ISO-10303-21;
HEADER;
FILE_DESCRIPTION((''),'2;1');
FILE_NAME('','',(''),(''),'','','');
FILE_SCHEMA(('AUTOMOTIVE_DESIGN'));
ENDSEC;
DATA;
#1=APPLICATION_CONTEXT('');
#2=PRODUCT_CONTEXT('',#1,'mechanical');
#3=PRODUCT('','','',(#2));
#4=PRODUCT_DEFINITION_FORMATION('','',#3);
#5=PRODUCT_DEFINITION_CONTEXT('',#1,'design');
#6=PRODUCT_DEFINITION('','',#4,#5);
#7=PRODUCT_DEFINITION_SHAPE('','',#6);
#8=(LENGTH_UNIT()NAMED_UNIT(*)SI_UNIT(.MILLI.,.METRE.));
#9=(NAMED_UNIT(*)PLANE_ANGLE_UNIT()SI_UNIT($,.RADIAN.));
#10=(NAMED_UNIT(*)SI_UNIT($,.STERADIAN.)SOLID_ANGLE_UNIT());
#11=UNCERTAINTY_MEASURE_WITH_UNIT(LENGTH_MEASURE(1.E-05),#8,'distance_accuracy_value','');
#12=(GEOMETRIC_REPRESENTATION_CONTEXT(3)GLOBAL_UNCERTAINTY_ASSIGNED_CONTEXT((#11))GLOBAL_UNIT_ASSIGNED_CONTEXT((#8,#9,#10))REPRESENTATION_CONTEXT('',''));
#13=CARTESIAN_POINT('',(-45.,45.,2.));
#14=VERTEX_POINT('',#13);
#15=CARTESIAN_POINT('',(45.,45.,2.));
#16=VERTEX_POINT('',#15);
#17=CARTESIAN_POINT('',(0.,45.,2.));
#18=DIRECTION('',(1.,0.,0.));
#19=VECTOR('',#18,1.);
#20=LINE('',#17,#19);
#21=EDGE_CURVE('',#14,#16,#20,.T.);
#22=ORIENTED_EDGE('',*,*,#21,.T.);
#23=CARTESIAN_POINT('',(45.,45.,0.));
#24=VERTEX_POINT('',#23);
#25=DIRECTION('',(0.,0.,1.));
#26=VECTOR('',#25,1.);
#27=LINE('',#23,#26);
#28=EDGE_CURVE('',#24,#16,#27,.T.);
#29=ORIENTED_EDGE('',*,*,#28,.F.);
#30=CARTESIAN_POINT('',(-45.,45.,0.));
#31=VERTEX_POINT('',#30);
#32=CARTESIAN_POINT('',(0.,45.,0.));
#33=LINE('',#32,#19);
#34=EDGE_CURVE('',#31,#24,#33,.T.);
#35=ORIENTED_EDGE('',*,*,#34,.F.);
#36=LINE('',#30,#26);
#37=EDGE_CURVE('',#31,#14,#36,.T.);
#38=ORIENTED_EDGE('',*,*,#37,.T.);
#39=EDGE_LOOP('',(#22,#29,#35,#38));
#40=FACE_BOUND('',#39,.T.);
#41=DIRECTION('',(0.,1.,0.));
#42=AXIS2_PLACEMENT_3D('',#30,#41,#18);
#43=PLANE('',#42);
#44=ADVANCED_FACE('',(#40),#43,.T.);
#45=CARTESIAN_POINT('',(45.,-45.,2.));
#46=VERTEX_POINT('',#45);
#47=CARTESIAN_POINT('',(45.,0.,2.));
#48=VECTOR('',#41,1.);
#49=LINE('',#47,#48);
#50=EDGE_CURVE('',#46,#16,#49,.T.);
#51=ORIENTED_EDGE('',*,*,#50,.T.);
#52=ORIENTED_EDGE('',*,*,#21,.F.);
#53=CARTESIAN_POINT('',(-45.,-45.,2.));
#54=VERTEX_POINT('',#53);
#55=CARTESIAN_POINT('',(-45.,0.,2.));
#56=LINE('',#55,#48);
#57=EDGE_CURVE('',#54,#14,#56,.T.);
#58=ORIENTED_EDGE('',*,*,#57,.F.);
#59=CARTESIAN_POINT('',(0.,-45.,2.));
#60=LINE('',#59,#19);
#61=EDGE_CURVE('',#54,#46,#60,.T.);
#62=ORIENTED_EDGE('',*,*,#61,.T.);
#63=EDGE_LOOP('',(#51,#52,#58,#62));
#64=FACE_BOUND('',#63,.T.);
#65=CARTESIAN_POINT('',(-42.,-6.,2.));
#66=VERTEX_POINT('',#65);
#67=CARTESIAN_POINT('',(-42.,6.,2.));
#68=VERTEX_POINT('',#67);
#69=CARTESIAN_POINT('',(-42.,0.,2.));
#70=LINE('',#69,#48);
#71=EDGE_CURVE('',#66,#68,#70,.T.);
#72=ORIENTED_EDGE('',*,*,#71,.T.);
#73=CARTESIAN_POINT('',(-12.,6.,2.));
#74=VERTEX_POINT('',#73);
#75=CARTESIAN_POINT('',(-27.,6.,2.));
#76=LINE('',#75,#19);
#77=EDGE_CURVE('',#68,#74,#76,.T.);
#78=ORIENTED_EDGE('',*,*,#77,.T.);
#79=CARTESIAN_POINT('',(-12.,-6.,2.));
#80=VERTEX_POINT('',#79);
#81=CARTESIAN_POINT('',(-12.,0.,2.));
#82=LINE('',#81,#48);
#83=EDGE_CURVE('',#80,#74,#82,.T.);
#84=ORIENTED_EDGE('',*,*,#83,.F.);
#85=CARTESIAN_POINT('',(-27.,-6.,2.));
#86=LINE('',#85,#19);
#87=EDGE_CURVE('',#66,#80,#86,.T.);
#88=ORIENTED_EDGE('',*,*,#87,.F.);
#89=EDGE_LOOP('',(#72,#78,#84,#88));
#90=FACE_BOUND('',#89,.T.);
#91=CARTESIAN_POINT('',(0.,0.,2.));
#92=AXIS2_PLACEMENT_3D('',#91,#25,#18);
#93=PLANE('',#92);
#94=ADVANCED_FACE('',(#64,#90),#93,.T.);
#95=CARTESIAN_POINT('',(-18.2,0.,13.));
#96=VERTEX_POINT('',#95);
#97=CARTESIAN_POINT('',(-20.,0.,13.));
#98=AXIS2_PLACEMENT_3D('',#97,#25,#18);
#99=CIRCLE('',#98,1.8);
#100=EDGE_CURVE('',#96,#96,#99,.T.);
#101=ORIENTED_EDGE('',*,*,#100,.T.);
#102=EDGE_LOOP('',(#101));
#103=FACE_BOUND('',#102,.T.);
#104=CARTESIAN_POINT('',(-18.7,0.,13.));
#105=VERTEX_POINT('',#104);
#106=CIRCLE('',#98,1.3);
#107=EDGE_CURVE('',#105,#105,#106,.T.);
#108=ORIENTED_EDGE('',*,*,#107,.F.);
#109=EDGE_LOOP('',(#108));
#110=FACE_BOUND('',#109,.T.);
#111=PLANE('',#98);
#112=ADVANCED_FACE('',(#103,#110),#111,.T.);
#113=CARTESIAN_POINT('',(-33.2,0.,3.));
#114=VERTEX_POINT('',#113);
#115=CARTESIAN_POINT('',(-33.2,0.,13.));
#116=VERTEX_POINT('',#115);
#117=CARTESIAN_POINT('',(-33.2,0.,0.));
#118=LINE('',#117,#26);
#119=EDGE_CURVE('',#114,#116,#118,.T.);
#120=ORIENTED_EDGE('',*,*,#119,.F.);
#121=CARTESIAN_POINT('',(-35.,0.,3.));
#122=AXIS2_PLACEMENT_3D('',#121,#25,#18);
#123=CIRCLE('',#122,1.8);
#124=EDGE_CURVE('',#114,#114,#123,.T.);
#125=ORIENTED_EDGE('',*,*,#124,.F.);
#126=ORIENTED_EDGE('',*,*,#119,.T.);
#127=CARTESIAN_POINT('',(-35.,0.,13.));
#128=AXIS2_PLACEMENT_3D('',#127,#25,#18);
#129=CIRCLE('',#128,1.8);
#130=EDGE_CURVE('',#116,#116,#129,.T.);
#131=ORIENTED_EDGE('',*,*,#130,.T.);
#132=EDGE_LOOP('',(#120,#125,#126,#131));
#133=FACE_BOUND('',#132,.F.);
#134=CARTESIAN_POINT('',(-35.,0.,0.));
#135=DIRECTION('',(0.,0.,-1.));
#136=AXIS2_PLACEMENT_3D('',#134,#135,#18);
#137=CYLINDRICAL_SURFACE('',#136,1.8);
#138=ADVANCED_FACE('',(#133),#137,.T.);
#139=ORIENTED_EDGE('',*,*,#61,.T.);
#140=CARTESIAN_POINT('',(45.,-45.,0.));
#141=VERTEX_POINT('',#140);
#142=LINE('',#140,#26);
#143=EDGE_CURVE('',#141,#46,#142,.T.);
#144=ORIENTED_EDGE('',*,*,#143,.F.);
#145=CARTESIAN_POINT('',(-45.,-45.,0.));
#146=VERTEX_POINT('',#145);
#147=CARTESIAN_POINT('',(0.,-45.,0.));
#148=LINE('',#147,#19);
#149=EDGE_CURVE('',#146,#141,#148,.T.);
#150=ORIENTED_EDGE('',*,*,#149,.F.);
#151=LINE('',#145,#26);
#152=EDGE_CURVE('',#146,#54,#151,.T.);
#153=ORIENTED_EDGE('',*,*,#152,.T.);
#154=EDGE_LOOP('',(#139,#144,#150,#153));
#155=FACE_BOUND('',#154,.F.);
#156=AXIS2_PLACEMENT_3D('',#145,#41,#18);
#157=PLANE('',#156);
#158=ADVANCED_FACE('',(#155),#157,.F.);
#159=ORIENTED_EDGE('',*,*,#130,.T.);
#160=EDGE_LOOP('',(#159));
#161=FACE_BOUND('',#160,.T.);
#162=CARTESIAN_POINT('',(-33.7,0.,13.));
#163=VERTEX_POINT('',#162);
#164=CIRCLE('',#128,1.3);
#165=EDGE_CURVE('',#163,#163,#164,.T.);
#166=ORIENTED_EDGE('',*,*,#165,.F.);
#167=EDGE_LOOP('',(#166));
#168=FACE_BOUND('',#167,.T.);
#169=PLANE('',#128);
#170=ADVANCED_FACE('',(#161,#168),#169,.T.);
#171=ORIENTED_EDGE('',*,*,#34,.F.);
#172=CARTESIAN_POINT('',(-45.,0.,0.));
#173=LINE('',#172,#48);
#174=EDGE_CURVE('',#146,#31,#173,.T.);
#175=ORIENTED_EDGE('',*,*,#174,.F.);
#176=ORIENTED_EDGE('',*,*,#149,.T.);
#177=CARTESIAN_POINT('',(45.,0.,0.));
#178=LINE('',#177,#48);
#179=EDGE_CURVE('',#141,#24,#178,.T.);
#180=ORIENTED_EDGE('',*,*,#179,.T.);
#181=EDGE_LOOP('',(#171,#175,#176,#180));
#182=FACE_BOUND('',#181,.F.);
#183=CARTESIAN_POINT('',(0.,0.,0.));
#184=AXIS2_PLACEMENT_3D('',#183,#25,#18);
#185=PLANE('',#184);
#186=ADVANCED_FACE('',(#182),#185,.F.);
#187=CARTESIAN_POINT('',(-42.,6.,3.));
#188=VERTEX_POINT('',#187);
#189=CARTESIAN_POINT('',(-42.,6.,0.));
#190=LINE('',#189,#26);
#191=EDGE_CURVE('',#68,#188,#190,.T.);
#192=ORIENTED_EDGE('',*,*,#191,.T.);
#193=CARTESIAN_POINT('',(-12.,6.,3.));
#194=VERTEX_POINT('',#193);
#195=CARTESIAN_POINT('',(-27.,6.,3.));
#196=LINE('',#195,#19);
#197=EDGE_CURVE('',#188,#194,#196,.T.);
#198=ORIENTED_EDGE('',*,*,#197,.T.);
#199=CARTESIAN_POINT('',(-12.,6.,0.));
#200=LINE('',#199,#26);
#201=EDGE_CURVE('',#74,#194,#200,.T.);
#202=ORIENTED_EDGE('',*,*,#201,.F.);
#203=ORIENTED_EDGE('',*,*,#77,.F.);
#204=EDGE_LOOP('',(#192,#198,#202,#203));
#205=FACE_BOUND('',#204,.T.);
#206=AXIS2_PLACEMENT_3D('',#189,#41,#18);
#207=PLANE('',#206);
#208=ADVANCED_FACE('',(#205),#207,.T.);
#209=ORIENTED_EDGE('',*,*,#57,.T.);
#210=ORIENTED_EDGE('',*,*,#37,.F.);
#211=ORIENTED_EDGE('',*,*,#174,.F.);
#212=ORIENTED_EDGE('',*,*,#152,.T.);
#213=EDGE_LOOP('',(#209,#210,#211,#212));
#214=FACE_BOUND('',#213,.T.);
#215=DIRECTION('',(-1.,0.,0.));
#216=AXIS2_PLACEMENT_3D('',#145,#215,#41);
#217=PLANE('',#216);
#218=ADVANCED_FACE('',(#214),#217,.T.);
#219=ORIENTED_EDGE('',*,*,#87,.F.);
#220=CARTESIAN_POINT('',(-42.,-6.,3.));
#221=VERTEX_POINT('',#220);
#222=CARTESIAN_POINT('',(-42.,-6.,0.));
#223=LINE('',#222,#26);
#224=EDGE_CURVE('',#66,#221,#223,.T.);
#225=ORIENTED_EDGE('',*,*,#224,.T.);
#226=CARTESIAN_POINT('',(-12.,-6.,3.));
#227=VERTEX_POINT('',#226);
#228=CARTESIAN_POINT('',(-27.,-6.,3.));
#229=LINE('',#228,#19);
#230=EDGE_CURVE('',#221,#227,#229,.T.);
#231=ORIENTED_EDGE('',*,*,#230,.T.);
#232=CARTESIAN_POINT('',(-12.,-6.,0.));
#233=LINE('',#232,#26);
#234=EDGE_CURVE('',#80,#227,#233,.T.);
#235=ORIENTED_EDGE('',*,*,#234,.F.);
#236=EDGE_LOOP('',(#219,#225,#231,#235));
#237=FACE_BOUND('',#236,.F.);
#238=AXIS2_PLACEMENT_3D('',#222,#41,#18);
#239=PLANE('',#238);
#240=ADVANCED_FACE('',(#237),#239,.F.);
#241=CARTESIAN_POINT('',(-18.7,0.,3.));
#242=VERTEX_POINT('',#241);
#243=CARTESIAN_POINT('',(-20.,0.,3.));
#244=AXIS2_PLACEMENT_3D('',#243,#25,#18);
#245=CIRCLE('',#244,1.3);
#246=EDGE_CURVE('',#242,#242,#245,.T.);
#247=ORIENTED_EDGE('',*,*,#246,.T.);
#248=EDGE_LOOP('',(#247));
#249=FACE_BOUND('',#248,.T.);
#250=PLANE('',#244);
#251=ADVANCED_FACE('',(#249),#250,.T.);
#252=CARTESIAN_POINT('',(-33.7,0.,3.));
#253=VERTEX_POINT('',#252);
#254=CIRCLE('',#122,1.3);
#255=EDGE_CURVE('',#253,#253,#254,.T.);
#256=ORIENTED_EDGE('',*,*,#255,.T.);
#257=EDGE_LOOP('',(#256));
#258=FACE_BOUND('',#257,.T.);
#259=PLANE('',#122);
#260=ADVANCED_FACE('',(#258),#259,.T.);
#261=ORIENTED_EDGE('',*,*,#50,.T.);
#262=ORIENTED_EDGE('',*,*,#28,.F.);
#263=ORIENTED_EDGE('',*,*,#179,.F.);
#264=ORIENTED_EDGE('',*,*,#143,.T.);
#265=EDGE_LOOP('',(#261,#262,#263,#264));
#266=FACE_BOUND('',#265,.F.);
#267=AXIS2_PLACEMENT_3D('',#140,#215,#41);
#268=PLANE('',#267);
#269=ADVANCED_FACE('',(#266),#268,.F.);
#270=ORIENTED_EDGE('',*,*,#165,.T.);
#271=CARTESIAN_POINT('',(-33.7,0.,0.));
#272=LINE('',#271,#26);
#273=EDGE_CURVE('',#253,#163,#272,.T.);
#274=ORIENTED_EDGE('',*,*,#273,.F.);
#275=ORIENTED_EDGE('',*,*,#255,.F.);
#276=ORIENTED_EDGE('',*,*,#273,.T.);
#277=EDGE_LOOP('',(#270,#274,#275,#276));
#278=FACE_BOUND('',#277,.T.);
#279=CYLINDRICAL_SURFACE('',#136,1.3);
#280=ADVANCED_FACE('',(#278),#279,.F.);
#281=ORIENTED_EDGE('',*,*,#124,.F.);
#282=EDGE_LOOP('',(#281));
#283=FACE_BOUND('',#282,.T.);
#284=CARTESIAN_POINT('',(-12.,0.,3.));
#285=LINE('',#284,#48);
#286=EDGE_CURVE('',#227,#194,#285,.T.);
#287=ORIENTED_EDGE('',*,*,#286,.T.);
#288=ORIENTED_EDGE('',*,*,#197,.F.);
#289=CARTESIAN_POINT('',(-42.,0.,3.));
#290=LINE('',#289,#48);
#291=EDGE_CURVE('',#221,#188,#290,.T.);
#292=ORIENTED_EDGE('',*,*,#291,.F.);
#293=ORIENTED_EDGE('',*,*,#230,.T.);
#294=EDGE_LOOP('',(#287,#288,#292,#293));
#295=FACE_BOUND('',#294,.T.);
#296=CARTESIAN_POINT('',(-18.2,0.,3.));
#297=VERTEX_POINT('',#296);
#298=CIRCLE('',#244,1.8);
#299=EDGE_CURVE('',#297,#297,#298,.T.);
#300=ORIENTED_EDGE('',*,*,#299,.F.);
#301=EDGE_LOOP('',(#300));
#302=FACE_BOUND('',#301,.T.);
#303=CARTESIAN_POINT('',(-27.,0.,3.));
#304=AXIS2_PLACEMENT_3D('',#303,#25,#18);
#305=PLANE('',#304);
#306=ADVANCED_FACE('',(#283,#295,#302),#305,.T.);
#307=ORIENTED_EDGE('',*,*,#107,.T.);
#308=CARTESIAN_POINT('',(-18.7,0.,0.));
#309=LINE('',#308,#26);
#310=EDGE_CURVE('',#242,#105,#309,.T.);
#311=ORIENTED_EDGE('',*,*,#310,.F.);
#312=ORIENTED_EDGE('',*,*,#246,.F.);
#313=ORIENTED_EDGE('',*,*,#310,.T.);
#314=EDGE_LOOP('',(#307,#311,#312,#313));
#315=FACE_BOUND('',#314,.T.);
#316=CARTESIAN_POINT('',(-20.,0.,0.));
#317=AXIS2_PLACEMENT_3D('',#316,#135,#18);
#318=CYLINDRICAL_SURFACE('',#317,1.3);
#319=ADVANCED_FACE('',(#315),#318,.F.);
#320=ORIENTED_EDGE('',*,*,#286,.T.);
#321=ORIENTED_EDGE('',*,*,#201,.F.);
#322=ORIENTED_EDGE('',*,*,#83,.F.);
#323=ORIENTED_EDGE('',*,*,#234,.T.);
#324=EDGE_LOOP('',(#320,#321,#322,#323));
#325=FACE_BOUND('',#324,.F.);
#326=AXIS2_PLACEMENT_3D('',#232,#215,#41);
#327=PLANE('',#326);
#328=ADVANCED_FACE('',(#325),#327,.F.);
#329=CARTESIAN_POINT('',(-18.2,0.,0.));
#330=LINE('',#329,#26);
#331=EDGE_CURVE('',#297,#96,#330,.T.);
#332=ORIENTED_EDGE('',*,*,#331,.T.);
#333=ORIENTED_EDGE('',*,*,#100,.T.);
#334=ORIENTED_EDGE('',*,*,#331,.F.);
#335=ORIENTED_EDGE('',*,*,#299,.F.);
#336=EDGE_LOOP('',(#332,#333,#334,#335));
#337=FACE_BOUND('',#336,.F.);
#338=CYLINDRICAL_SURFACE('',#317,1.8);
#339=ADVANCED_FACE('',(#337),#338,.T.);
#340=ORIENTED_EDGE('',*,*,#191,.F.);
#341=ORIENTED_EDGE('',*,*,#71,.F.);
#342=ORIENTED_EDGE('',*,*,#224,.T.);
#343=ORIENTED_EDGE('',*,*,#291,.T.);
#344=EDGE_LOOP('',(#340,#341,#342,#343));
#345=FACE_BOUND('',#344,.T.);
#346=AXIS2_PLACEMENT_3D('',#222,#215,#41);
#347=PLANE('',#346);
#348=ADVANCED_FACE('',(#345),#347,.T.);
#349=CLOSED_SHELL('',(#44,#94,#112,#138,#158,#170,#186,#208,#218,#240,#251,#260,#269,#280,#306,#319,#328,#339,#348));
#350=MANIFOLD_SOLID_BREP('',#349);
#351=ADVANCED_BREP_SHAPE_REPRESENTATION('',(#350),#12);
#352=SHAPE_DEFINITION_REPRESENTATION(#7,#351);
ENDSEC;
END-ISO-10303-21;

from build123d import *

# Parameters (mm, degrees)
F0_R     = 1.8
F0_R_2   = 1.3
F1_DEPTH = 13
F0_W     = 30
F0_H     = 12
F2_DEPTH = 3
F0_W_2   = 90
F0_H_2   = 90
F3_DEPTH = 2


with BuildPart() as f1:
    # F0 (on Top) → F1 (new body)
    with BuildSketch(Plane.XY):
        with Locations((-35, 0)):
            Circle(F0_R)
        with Locations((-35, 0)):
            Circle(F0_R_2, mode=Mode.SUBTRACT)
    extrude(amount=F1_DEPTH)



with BuildPart() as f1b:
    # F0 (on Top) → F1, piece 2 (new body)
    with BuildSketch(Plane.XY):
        with Locations((-20, 0)):
            Circle(F0_R)
        with Locations((-20, 0)):
            Circle(F0_R_2, mode=Mode.SUBTRACT)
    extrude(amount=F1_DEPTH)


with BuildPart() as f1_1:
    add(f1.part)

    add(f1b.part)  # F2 merges F1b
    # F0 (on Top) → F2 (join)
    with BuildSketch(Plane.XY):
        with Locations((-27, 0)):
            Rectangle(F0_W, F0_H)
        with Locations((-35, 0)):
            Circle(F0_R, mode=Mode.SUBTRACT)
        with Locations((-20, 0)):
            Circle(F0_R, mode=Mode.SUBTRACT)
        with Locations((-20, 0)):
            Circle(F0_R_2)
        with Locations((-35, 0)):
            Circle(F0_R_2)
    extrude(amount=F2_DEPTH)

    # F0 (on Top) → F3 (join)
    with BuildSketch(Plane.XY):
        Rectangle(F0_W_2, F0_H_2)
        with Locations((-27, 0)):
            Rectangle(F0_W, F0_H, mode=Mode.SUBTRACT)
    extrude(amount=F3_DEPTH)


solid = f1_1.part
